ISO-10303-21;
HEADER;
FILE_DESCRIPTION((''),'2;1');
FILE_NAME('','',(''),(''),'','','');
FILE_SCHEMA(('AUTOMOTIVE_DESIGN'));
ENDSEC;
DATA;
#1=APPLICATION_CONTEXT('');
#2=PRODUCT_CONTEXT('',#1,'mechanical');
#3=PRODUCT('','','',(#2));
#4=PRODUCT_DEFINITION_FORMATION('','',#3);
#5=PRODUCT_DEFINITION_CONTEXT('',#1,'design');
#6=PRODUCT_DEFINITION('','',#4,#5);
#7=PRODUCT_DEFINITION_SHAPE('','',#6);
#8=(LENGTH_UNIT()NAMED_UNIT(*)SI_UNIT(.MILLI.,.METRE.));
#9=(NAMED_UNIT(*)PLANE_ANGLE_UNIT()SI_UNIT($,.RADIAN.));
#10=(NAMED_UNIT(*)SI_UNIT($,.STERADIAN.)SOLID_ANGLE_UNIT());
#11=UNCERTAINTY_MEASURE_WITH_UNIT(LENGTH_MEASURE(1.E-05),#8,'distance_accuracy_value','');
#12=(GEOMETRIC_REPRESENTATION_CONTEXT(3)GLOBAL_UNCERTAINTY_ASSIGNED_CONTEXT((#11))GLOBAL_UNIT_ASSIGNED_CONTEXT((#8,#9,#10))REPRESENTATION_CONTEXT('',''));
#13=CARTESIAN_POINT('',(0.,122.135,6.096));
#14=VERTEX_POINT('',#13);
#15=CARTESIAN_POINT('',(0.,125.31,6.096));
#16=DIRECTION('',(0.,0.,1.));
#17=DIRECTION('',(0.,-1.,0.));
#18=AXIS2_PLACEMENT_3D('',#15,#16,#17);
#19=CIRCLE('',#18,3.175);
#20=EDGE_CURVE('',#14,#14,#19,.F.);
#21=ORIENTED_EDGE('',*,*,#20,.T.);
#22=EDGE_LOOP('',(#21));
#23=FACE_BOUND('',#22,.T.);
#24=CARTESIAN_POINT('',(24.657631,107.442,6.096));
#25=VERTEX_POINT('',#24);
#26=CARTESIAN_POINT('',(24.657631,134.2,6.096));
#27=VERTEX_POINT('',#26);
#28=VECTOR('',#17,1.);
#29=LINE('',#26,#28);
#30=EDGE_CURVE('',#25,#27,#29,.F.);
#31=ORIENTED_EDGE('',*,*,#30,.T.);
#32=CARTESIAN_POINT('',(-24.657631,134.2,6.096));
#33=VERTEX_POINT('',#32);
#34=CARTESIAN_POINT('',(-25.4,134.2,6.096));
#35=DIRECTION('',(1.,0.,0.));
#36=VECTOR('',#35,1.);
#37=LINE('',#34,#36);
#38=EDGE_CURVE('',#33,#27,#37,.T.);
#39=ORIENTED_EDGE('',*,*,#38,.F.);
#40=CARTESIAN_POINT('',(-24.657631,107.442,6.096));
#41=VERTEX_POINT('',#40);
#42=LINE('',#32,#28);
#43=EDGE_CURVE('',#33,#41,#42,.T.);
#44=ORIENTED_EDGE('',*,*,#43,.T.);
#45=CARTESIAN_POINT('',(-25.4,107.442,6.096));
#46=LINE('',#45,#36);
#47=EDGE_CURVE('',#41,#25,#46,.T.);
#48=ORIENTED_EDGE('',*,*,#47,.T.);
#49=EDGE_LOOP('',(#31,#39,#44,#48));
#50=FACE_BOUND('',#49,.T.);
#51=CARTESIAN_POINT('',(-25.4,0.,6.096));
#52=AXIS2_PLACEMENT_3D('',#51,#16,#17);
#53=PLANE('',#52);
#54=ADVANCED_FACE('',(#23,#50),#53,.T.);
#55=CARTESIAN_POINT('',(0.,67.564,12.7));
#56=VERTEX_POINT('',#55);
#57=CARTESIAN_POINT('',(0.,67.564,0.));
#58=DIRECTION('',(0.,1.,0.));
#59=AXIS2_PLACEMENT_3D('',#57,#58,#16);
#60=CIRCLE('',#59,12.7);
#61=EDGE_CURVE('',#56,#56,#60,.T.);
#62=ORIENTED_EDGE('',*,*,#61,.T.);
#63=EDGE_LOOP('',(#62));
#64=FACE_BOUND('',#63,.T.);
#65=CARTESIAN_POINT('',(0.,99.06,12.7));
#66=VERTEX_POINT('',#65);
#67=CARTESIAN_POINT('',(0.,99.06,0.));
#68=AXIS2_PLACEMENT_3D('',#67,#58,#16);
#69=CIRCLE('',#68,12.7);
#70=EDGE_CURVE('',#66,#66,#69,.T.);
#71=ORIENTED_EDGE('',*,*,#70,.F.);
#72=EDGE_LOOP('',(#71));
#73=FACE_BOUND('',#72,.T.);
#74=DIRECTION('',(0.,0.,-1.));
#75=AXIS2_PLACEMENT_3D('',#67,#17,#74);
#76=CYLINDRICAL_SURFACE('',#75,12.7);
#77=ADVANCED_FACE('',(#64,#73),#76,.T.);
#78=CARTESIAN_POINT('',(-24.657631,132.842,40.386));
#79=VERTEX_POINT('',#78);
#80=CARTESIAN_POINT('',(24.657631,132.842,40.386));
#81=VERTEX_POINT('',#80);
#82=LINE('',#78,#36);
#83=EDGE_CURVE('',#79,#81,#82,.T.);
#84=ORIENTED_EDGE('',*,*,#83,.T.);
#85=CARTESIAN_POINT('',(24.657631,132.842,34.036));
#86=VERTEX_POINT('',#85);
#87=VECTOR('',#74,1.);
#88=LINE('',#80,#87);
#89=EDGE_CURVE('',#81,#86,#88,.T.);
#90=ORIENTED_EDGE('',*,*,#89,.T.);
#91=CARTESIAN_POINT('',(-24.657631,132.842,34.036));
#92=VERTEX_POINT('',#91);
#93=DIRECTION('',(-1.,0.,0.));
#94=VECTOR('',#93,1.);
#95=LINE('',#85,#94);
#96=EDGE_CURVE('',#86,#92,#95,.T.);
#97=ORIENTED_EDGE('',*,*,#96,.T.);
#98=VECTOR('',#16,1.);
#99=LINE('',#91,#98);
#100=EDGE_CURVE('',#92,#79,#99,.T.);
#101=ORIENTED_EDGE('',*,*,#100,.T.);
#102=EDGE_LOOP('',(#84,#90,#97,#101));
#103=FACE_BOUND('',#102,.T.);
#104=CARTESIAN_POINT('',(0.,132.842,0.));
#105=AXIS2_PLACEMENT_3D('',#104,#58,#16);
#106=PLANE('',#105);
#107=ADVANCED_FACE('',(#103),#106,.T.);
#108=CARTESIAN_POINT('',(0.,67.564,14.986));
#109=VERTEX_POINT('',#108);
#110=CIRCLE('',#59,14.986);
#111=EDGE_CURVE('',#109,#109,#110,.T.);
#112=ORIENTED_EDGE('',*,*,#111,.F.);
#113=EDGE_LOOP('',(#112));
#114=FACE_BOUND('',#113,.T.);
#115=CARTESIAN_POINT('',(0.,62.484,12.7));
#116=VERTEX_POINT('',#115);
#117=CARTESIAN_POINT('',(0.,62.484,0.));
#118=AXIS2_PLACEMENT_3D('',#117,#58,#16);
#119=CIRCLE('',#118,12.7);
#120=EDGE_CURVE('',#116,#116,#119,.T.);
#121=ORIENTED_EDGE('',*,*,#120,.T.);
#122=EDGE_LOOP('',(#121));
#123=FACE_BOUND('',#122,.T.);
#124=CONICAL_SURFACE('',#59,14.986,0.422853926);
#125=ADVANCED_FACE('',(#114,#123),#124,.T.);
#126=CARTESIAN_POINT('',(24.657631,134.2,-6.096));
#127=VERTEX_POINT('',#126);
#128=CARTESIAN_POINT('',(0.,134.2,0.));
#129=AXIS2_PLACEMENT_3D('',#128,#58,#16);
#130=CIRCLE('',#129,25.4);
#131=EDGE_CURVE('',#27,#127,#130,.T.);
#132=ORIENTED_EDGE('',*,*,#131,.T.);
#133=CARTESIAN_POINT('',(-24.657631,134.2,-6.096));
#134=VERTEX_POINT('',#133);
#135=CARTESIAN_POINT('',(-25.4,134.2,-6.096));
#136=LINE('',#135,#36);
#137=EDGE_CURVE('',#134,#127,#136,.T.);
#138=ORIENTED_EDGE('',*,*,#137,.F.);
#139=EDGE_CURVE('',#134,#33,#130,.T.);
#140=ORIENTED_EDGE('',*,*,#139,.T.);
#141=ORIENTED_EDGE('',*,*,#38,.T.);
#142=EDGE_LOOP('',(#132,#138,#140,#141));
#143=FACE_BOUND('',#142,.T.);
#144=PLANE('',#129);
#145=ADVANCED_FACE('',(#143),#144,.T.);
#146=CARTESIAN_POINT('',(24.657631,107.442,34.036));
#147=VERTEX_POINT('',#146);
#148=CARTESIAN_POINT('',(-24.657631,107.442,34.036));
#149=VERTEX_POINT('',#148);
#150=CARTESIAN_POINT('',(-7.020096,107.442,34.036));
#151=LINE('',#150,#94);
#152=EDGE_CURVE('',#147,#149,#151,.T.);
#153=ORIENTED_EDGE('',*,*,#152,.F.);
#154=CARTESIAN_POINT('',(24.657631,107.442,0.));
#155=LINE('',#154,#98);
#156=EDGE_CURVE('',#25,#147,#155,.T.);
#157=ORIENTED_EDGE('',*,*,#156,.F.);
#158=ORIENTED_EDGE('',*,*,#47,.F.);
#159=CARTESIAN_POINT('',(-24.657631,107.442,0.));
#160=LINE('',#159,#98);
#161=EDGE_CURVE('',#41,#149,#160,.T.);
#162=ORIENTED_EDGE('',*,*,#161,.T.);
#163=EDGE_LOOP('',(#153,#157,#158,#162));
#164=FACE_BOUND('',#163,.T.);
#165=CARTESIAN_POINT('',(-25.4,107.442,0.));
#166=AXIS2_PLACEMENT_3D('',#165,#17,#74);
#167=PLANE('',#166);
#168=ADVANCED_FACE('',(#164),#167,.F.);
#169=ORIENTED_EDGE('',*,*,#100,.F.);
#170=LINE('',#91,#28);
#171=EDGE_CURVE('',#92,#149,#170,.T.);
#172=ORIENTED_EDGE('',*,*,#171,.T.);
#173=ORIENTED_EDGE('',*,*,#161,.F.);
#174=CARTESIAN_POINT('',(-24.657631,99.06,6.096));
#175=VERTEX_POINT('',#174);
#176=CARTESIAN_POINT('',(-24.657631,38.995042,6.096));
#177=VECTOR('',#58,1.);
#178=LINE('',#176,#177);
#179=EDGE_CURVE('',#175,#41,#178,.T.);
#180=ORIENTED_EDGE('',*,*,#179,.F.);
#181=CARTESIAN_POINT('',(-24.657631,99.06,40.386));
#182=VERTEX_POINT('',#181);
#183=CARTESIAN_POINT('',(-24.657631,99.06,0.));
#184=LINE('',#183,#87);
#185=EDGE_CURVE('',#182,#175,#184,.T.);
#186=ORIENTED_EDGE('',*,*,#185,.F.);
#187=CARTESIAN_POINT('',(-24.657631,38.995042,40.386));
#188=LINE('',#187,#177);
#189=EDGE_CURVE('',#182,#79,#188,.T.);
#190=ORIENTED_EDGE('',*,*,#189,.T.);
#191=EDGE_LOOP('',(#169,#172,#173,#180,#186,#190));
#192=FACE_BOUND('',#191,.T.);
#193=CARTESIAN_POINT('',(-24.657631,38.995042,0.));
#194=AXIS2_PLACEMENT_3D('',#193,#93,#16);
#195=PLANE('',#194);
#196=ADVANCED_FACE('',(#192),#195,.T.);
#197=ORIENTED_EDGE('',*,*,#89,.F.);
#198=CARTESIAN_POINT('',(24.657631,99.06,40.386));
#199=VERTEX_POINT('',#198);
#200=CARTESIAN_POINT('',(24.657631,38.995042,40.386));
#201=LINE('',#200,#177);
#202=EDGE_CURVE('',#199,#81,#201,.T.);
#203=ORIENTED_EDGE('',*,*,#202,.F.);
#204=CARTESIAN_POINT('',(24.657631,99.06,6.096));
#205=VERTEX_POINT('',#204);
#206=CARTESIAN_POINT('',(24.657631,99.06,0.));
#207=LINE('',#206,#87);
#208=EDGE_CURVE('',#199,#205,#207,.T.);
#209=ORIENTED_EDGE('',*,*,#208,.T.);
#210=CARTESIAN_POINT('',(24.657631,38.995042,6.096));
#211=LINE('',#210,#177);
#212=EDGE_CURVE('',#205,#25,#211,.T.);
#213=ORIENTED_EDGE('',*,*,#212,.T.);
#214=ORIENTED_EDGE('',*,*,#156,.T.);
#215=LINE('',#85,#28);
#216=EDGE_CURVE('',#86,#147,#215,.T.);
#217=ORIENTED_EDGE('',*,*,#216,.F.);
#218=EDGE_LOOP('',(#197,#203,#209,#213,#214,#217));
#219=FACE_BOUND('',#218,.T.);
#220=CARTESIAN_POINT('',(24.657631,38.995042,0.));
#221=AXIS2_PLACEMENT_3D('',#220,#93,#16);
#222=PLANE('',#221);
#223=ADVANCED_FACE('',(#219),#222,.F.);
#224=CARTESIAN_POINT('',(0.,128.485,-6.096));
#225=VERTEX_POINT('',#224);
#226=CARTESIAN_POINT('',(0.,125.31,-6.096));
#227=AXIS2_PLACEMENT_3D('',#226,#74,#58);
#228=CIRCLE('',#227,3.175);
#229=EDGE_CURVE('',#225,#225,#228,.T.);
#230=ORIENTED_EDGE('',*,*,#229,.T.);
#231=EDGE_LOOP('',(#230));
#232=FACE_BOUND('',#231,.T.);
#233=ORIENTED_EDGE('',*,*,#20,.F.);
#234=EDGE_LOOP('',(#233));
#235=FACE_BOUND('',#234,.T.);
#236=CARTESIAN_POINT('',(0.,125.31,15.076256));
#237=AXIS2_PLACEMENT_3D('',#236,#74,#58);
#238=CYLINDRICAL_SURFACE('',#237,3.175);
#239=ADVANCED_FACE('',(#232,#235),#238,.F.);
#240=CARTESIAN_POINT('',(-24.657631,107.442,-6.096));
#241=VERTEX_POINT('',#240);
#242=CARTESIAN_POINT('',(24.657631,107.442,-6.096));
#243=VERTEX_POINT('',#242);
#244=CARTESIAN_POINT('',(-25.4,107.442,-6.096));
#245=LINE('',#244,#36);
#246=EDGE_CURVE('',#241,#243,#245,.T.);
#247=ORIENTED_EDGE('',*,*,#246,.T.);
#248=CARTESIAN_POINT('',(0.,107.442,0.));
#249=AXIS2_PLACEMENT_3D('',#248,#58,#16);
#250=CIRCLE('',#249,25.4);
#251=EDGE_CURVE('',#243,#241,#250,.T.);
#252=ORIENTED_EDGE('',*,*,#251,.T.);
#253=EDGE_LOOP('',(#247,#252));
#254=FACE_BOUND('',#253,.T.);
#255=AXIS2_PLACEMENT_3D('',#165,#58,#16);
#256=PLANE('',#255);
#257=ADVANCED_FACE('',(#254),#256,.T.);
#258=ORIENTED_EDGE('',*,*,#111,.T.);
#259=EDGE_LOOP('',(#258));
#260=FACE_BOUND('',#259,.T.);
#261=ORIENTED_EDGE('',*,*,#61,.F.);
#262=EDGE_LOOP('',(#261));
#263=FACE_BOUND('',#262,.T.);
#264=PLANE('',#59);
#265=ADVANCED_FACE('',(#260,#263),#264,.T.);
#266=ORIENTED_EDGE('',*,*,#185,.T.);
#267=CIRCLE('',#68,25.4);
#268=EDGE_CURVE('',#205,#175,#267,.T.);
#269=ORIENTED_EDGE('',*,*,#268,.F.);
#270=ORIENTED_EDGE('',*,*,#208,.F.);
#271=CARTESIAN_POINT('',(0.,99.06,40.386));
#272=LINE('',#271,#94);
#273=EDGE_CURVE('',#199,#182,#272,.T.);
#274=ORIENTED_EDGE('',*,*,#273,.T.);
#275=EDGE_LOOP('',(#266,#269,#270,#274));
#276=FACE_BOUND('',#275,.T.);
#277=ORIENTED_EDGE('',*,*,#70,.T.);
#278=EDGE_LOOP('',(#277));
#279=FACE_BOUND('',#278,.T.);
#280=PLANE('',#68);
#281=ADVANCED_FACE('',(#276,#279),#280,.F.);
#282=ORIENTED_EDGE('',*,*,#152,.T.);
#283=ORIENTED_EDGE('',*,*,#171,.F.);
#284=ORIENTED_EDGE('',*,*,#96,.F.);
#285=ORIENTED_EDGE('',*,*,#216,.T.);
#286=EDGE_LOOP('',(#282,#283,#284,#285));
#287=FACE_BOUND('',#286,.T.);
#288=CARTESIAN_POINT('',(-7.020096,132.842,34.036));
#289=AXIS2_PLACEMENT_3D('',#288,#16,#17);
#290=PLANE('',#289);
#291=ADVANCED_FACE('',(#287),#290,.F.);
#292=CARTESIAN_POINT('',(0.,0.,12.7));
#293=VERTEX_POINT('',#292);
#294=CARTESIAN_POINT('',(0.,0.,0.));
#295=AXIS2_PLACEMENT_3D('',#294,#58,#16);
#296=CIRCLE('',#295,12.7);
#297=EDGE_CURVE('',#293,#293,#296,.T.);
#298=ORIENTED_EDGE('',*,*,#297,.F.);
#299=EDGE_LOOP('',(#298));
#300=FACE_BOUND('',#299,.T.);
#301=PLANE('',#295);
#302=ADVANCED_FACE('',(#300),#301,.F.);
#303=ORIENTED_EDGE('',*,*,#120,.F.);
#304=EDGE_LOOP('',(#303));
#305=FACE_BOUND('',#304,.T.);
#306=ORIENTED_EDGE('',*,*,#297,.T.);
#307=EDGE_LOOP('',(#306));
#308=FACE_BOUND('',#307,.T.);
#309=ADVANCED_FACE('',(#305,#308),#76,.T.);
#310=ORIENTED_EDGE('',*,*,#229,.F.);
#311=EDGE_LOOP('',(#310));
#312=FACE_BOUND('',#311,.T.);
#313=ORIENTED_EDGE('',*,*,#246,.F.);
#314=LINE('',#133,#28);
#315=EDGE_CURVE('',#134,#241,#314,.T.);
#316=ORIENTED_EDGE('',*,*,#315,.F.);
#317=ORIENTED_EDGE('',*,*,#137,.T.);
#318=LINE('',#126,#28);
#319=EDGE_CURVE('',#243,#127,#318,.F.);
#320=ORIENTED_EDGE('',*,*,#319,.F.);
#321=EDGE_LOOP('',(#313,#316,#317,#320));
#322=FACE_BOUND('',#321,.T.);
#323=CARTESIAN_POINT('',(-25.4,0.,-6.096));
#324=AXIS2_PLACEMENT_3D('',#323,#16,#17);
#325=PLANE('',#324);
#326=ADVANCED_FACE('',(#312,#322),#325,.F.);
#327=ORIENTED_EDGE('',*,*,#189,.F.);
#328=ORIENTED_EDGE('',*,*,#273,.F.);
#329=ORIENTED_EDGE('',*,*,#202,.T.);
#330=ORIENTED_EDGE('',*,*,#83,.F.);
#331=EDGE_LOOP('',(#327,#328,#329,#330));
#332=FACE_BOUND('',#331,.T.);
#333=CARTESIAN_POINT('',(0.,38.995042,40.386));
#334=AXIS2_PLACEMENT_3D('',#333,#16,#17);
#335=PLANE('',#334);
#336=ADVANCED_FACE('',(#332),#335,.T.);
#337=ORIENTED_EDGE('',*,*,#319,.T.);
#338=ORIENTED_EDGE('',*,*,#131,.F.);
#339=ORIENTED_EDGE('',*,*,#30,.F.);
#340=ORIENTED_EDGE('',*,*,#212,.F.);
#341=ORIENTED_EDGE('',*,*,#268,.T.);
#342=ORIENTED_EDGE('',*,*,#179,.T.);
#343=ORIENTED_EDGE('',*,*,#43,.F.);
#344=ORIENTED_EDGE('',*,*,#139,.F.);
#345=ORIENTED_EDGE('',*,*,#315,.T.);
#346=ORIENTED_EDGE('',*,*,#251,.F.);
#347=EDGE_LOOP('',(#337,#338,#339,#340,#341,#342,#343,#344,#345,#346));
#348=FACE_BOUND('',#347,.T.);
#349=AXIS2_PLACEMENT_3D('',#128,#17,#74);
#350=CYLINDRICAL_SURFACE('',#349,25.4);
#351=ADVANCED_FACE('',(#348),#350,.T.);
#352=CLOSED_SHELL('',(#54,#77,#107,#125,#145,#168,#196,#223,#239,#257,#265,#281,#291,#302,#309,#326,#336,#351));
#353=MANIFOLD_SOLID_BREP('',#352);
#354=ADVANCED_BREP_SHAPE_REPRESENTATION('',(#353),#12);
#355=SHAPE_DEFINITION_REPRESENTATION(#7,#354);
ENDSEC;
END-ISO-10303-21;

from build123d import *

# Parameters (mm, degrees)
SKETCH1_R                      = 12.7
PART_THAT_GOES_INTO_BASE_DEPTH = 99.06
SKETCH3_R                      = 25.4
BOSS_EXTRUDE2_DEPTH            = 35.14
CUT_EXTRUDE1_START             = -75.457631354
CUT_EXTRUDE1_OUTLINE_W         = 19.304
CUT_EXTRUDE1_OUTLINE_H         = 26.758
CUT_EXTRUDE1_DEPTH             = 49.315262708
BOSS_EXTRUDE3_START            = -8.382
BOSS_EXTRUDE3_DEPTH            = 8.382
BOSS_EXTRUDE4_DEPTH            = 25.4
SKETCH7_R                      = 3.175
CUT_EXTRUDE2_DEPTH             = 12.192


# Read off the part's stored shape, not the designer's step: Cut-Extrude1
with BuildPart() as part:
    # Sketch1 → Part that goes into base (new body)
    with BuildSketch(Plane(origin=(0, 0, 0), x_dir=(1, 0, 0), z_dir=(0, 1, 0))):
        with Locations(Location((0, 0, 0), (0, 0, 270))):
            Circle(SKETCH1_R)
    extrude(amount=PART_THAT_GOES_INTO_BASE_DEPTH)

    # Sketch2 → Clip in mechanism (revolve)
    with BuildSketch(Plane.XY, mode=Mode.PRIVATE) as clip_in_mechanism_sk:
        Polygon((12.7, 62.484), (12.7, 67.564), (14.986, 67.564), align=None)
    revolve(clip_in_mechanism_sk.sketch.rotate(Axis((0, 99.06, 0), (0, -1, 0)), 90), axis=Axis((0, 99.06, 0), (0, -1, 0)))

    # Sketch3 → Boss-Extrude2 (add)
    with BuildSketch(Plane(origin=(0, 99.06, 0), x_dir=(1, 0, 0), z_dir=(0, 1, 0))):
        with Locations(Location((0, 0, 0), (0, 0, 270))):
            Circle(SKETCH3_R)
    extrude(amount=BOSS_EXTRUDE2_DEPTH)

    # Cut-Extrude1 outline → Cut-Extrude1 (cut)
    with BuildSketch(Plane(origin=(50.8, 0, 0), x_dir=(0, 0, -1), z_dir=(1, 0, 0)).offset(CUT_EXTRUDE1_START)):
        with Locations((15.748, 120.821)):
            Rectangle(CUT_EXTRUDE1_OUTLINE_W, CUT_EXTRUDE1_OUTLINE_H)
        with Locations((-15.748, 120.821)):
            Rectangle(CUT_EXTRUDE1_OUTLINE_W, CUT_EXTRUDE1_OUTLINE_H)
    extrude(amount=CUT_EXTRUDE1_DEPTH, mode=Mode.SUBTRACT)

    # Sketch5 → Boss-Extrude3 (add)
    with BuildSketch(Plane(origin=(0, 107.442, 0), x_dir=(1, 0, 0), z_dir=(0, 1, 0)).offset(BOSS_EXTRUDE3_START)):
        with BuildLine():
            Line((24.657631354, -40.386), (24.657631354, -6.096))
            ThreePointArc((24.657631354, -6.096), (0, -25.4), (-24.657631354, -6.096))
            Line((-24.657631354, -6.096), (-24.657631354, -40.386))
            Line((-24.657631354, -40.386), (24.657631354, -40.386))
        make_face()
    extrude(amount=BOSS_EXTRUDE3_DEPTH)

    # Sketch6 → Boss-Extrude4 (add)
    with BuildSketch(Plane(origin=(0, 107.442, 0), x_dir=(1, 0, 0), z_dir=(0, 1, 0))):
        Polygon((5.242487602, -34.036), (-7.020096484, -34.036), (-24.657631354, -34.036), (-24.657631354, -40.386), (24.657631354, -40.386), (24.657631354, -34.036), align=None)
    extrude(amount=BOSS_EXTRUDE4_DEPTH)

    # Sketch7 → Cut-Extrude2 (cut)
    with BuildSketch(Plane(origin=(0, 0, -6.096), x_dir=(-1, 0, 0), z_dir=(0, 0, -1))):
        with Locations(Location((0, 125.31, 0), (0, 0, 90))):
            Circle(SKETCH7_R)
    extrude(amount=-CUT_EXTRUDE2_DEPTH, mode=Mode.SUBTRACT)


solid = part.part
